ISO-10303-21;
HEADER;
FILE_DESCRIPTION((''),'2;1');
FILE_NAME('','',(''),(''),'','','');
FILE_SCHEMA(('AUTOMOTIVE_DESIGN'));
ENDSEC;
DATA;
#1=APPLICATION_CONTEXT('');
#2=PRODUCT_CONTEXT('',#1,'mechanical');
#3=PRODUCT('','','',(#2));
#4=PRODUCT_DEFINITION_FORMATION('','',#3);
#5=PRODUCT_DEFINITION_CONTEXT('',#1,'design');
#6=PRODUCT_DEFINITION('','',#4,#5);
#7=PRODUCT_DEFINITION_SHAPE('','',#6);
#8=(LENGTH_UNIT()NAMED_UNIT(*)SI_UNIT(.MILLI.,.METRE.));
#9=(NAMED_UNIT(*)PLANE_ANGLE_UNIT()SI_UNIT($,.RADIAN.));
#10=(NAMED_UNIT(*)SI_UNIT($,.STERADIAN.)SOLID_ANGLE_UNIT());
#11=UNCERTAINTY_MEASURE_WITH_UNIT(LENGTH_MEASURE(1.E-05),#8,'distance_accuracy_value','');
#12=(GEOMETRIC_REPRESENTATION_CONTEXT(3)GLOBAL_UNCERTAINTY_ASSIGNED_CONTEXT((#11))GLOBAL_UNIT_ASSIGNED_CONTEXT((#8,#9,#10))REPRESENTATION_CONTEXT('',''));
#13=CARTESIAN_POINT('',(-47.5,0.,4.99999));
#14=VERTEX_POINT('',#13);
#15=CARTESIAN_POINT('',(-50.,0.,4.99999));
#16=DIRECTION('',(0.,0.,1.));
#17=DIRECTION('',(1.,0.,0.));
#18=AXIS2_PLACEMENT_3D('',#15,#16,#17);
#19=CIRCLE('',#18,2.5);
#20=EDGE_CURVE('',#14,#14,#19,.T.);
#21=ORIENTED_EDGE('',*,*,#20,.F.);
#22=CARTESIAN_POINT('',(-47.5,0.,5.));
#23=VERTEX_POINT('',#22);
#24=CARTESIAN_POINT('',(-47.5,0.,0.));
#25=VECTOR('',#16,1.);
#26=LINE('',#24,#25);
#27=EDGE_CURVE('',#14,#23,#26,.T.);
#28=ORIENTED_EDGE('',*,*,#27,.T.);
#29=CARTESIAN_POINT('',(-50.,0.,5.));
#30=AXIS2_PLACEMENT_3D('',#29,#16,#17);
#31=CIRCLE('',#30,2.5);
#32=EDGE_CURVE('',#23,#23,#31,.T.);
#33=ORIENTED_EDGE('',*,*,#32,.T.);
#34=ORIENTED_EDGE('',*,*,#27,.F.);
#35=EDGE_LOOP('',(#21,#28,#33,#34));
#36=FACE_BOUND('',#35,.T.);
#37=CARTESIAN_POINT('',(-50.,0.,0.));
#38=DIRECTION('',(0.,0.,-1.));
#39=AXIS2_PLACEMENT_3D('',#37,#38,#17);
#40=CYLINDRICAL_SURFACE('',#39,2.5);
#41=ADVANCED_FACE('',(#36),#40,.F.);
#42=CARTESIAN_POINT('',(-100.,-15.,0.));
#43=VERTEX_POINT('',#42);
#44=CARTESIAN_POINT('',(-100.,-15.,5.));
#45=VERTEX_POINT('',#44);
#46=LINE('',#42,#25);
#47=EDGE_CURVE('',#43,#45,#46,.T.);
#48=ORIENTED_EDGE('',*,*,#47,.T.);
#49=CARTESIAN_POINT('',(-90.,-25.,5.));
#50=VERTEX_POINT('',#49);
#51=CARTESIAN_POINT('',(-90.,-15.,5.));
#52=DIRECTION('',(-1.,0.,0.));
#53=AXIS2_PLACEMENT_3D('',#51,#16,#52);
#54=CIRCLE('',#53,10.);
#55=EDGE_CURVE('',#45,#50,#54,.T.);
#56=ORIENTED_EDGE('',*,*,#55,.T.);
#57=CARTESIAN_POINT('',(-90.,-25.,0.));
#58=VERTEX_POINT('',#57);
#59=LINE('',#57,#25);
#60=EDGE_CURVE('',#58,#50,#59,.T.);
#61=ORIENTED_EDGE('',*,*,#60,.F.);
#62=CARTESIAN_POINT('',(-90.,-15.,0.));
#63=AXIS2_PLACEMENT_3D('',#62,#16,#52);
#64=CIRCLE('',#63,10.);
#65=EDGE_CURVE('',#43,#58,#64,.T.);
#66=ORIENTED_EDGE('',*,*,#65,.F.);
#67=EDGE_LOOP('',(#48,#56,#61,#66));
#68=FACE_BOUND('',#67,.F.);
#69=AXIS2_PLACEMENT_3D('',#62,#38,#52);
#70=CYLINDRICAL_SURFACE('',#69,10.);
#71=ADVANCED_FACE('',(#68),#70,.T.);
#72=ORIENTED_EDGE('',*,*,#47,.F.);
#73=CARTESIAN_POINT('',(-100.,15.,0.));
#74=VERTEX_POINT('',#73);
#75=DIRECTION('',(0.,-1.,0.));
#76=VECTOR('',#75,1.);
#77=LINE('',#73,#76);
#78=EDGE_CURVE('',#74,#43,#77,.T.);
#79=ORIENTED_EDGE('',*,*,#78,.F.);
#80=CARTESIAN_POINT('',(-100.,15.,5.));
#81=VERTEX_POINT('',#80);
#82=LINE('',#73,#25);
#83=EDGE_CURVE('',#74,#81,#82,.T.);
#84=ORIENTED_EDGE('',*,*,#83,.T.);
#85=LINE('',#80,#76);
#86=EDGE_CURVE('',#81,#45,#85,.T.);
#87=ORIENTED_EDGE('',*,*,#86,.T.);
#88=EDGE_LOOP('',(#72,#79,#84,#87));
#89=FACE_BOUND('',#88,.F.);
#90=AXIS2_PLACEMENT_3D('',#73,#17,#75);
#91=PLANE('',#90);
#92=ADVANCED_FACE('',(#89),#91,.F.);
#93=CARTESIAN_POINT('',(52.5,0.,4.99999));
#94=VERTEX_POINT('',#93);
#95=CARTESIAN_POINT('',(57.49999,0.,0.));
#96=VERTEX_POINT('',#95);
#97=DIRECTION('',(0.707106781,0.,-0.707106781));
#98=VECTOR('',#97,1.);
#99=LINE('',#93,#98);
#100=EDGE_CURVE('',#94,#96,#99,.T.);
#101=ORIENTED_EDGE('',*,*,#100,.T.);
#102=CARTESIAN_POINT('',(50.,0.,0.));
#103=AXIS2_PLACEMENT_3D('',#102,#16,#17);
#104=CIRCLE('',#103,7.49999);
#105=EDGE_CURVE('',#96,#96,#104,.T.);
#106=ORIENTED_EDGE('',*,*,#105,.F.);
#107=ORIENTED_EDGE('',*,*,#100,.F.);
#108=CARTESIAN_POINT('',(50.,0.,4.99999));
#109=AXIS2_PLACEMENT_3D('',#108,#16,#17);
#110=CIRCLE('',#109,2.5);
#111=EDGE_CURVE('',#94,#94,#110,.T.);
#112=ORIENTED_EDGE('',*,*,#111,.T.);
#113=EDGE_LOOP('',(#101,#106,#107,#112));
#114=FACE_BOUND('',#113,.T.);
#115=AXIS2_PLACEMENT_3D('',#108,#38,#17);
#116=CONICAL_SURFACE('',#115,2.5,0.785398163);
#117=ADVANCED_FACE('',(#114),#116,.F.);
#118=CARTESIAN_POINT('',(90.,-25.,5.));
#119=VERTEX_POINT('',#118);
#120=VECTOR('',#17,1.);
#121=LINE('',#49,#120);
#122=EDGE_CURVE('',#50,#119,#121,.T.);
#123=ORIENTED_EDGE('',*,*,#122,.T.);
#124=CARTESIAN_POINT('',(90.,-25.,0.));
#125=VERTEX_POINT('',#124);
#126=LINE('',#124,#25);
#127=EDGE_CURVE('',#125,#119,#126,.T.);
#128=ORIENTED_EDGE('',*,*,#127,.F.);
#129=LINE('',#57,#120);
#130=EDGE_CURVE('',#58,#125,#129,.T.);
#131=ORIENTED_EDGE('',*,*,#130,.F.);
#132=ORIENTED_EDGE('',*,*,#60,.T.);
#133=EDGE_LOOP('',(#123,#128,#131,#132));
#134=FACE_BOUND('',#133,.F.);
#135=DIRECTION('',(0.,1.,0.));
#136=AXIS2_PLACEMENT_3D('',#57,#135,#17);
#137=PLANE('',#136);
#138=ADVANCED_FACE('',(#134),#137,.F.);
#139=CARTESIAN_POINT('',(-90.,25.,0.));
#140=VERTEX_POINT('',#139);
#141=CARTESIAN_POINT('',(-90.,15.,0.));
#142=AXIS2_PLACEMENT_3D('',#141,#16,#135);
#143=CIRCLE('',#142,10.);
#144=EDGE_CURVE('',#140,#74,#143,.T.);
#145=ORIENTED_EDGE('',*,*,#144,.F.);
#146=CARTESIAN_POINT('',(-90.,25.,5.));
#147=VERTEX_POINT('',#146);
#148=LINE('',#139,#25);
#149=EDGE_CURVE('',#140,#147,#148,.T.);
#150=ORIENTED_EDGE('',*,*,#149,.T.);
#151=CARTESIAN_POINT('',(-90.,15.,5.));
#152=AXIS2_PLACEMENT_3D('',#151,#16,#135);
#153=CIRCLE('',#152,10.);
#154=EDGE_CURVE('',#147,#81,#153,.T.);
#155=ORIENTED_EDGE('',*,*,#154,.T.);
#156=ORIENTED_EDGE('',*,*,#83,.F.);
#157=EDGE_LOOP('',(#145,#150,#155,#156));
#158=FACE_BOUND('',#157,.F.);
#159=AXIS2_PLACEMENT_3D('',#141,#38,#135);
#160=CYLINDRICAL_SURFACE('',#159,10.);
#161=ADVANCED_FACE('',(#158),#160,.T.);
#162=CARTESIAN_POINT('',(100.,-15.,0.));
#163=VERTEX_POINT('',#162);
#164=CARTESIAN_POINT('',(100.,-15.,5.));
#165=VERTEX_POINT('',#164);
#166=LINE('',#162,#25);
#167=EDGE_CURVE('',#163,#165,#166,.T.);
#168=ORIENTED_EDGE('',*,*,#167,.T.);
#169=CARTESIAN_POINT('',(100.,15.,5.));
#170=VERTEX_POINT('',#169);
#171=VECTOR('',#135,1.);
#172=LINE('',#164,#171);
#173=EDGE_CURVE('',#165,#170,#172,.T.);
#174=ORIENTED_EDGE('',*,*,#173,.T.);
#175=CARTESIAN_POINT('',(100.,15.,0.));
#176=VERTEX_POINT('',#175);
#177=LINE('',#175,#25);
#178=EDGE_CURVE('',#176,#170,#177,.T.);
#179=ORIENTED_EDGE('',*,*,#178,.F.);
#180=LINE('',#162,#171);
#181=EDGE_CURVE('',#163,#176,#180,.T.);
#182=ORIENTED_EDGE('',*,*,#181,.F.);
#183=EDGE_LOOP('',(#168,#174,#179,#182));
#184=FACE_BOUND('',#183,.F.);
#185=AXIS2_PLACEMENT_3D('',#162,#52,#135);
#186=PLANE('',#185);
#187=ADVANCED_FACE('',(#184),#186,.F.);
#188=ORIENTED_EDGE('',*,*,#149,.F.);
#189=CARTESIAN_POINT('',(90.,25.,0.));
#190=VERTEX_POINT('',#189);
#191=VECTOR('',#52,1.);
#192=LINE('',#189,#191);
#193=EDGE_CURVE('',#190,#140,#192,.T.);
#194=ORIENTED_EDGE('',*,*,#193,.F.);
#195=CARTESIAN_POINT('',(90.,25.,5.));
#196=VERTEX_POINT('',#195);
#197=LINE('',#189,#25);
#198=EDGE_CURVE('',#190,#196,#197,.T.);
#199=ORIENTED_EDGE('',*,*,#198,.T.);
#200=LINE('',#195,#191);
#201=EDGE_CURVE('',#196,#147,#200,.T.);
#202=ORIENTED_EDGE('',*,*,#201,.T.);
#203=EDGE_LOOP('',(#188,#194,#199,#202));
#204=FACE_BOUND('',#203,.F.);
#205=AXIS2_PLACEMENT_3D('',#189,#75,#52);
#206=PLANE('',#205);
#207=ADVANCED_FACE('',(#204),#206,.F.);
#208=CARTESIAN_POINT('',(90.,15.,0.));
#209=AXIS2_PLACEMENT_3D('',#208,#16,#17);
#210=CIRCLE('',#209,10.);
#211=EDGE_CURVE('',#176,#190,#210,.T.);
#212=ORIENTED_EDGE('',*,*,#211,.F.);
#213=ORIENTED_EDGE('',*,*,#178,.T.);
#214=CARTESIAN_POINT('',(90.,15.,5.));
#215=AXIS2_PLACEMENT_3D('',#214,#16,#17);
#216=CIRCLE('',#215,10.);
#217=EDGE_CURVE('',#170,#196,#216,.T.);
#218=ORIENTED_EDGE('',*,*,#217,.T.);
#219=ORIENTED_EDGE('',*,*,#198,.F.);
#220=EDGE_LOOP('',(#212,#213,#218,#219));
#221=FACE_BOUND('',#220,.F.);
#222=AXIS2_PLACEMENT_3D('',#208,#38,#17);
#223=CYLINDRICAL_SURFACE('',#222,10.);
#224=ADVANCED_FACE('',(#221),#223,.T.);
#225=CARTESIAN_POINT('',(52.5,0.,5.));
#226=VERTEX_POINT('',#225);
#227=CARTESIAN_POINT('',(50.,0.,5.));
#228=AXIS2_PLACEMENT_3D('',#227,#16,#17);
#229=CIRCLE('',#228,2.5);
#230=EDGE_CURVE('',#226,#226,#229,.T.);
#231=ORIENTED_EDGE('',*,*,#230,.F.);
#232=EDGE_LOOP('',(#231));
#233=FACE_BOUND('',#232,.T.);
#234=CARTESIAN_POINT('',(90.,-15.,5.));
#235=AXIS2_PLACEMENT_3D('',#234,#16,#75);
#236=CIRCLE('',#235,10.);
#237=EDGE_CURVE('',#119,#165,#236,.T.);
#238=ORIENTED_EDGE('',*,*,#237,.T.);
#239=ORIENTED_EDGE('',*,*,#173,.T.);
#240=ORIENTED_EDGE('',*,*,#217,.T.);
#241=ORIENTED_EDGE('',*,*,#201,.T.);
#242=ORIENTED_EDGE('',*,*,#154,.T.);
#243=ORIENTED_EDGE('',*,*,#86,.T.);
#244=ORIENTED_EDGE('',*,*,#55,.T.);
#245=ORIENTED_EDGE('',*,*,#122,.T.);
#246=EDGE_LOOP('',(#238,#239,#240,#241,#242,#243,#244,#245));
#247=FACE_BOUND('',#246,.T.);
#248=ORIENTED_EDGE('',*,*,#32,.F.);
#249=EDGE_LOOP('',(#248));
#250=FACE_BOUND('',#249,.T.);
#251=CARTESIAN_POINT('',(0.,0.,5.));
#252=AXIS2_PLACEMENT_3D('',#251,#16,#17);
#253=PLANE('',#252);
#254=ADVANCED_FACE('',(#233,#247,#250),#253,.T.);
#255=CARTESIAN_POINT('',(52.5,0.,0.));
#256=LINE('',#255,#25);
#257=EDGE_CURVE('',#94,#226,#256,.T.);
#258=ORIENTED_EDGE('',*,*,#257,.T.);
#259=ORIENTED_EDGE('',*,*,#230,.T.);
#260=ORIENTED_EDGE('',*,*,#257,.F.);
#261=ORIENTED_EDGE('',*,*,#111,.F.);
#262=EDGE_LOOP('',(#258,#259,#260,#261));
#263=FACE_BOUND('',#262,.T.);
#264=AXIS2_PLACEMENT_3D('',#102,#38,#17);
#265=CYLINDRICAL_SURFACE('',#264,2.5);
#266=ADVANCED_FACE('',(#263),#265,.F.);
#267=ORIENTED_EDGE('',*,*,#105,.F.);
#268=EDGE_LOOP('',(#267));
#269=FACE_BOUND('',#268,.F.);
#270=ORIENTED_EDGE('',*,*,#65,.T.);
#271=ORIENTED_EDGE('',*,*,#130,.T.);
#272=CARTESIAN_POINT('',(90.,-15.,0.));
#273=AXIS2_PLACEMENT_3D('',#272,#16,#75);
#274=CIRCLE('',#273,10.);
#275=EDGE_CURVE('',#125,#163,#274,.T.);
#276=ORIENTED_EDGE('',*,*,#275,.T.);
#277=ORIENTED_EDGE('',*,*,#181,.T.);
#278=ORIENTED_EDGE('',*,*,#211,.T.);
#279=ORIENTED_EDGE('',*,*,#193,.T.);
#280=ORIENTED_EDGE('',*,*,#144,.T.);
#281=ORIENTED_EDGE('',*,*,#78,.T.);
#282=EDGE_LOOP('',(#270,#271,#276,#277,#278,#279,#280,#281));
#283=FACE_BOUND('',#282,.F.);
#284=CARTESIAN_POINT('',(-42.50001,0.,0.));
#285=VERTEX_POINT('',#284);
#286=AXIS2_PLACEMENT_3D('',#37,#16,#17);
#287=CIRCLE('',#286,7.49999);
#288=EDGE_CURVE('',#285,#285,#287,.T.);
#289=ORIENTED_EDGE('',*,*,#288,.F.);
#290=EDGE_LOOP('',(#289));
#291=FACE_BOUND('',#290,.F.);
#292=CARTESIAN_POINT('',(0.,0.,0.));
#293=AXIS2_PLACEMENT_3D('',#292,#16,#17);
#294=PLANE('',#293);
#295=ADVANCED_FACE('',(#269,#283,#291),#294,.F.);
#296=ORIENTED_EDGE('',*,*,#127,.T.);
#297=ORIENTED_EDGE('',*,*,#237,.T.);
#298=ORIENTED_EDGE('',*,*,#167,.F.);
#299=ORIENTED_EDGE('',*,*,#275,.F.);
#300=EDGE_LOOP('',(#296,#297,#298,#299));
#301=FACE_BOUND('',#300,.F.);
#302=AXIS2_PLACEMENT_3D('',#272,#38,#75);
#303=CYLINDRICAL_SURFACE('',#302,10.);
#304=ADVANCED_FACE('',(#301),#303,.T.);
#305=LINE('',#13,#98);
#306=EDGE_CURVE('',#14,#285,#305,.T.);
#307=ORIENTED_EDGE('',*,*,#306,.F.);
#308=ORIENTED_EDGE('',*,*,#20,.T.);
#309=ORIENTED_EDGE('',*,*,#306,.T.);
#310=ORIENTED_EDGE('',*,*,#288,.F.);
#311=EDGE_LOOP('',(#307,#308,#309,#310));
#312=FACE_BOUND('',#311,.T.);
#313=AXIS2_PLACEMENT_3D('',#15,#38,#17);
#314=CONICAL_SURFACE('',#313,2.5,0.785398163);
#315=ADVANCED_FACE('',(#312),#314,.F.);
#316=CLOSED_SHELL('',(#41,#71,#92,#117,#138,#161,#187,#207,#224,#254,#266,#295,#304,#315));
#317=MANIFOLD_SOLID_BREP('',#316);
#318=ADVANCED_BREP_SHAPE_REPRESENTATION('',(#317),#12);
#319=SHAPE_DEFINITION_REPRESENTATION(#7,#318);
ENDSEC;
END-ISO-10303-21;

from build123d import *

# Parameters (mm, degrees)
F0_R     = 2.5
F1_DEPTH = 5
F2_SIZE  = 4.99999


# Not quite as in the source:
# - a fillet or chamfer is up to 0.001 mm smaller than in the source, because OpenCascade refuses the exact size


with BuildPart() as f1:
    # F0 (on Top) → F1 (new body)
    with BuildSketch(Plane.XY):
        with BuildLine():
            ThreePointArc((100, 15), (97.0710678119, 22.0710678119), (90, 25))
            Line((90, 25), (-90, 25))
            ThreePointArc((-90, 25), (-97.0710678119, 22.0710678119), (-100, 15))
            Line((-100, 15), (-100, -15))
            ThreePointArc((-100, -15), (-97.0710678119, -22.0710678119), (-90, -25))
            Line((-90, -25), (90, -25))
            ThreePointArc((90, -25), (97.0710678119, -22.0710678119), (100, -15))
            Line((100, -15), (100, 15))
        make_face()
        with Locations((-50, 0)):
            Circle(F0_R, mode=Mode.SUBTRACT)
        with Locations((50, 0)):
            Circle(F0_R, mode=Mode.SUBTRACT)
    extrude(amount=F1_DEPTH)

    # F2 (size 5 in the source; OpenCascade refuses exactly that, so slightly less here)
    f2_edges = [f1.edges().sort_by_distance(p)[0] for p in [
        (-52.5, 0, 0),
        (47.5, 0, 0),
    ]]
    chamfer(f2_edges, length=F2_SIZE)


solid = f1.part
